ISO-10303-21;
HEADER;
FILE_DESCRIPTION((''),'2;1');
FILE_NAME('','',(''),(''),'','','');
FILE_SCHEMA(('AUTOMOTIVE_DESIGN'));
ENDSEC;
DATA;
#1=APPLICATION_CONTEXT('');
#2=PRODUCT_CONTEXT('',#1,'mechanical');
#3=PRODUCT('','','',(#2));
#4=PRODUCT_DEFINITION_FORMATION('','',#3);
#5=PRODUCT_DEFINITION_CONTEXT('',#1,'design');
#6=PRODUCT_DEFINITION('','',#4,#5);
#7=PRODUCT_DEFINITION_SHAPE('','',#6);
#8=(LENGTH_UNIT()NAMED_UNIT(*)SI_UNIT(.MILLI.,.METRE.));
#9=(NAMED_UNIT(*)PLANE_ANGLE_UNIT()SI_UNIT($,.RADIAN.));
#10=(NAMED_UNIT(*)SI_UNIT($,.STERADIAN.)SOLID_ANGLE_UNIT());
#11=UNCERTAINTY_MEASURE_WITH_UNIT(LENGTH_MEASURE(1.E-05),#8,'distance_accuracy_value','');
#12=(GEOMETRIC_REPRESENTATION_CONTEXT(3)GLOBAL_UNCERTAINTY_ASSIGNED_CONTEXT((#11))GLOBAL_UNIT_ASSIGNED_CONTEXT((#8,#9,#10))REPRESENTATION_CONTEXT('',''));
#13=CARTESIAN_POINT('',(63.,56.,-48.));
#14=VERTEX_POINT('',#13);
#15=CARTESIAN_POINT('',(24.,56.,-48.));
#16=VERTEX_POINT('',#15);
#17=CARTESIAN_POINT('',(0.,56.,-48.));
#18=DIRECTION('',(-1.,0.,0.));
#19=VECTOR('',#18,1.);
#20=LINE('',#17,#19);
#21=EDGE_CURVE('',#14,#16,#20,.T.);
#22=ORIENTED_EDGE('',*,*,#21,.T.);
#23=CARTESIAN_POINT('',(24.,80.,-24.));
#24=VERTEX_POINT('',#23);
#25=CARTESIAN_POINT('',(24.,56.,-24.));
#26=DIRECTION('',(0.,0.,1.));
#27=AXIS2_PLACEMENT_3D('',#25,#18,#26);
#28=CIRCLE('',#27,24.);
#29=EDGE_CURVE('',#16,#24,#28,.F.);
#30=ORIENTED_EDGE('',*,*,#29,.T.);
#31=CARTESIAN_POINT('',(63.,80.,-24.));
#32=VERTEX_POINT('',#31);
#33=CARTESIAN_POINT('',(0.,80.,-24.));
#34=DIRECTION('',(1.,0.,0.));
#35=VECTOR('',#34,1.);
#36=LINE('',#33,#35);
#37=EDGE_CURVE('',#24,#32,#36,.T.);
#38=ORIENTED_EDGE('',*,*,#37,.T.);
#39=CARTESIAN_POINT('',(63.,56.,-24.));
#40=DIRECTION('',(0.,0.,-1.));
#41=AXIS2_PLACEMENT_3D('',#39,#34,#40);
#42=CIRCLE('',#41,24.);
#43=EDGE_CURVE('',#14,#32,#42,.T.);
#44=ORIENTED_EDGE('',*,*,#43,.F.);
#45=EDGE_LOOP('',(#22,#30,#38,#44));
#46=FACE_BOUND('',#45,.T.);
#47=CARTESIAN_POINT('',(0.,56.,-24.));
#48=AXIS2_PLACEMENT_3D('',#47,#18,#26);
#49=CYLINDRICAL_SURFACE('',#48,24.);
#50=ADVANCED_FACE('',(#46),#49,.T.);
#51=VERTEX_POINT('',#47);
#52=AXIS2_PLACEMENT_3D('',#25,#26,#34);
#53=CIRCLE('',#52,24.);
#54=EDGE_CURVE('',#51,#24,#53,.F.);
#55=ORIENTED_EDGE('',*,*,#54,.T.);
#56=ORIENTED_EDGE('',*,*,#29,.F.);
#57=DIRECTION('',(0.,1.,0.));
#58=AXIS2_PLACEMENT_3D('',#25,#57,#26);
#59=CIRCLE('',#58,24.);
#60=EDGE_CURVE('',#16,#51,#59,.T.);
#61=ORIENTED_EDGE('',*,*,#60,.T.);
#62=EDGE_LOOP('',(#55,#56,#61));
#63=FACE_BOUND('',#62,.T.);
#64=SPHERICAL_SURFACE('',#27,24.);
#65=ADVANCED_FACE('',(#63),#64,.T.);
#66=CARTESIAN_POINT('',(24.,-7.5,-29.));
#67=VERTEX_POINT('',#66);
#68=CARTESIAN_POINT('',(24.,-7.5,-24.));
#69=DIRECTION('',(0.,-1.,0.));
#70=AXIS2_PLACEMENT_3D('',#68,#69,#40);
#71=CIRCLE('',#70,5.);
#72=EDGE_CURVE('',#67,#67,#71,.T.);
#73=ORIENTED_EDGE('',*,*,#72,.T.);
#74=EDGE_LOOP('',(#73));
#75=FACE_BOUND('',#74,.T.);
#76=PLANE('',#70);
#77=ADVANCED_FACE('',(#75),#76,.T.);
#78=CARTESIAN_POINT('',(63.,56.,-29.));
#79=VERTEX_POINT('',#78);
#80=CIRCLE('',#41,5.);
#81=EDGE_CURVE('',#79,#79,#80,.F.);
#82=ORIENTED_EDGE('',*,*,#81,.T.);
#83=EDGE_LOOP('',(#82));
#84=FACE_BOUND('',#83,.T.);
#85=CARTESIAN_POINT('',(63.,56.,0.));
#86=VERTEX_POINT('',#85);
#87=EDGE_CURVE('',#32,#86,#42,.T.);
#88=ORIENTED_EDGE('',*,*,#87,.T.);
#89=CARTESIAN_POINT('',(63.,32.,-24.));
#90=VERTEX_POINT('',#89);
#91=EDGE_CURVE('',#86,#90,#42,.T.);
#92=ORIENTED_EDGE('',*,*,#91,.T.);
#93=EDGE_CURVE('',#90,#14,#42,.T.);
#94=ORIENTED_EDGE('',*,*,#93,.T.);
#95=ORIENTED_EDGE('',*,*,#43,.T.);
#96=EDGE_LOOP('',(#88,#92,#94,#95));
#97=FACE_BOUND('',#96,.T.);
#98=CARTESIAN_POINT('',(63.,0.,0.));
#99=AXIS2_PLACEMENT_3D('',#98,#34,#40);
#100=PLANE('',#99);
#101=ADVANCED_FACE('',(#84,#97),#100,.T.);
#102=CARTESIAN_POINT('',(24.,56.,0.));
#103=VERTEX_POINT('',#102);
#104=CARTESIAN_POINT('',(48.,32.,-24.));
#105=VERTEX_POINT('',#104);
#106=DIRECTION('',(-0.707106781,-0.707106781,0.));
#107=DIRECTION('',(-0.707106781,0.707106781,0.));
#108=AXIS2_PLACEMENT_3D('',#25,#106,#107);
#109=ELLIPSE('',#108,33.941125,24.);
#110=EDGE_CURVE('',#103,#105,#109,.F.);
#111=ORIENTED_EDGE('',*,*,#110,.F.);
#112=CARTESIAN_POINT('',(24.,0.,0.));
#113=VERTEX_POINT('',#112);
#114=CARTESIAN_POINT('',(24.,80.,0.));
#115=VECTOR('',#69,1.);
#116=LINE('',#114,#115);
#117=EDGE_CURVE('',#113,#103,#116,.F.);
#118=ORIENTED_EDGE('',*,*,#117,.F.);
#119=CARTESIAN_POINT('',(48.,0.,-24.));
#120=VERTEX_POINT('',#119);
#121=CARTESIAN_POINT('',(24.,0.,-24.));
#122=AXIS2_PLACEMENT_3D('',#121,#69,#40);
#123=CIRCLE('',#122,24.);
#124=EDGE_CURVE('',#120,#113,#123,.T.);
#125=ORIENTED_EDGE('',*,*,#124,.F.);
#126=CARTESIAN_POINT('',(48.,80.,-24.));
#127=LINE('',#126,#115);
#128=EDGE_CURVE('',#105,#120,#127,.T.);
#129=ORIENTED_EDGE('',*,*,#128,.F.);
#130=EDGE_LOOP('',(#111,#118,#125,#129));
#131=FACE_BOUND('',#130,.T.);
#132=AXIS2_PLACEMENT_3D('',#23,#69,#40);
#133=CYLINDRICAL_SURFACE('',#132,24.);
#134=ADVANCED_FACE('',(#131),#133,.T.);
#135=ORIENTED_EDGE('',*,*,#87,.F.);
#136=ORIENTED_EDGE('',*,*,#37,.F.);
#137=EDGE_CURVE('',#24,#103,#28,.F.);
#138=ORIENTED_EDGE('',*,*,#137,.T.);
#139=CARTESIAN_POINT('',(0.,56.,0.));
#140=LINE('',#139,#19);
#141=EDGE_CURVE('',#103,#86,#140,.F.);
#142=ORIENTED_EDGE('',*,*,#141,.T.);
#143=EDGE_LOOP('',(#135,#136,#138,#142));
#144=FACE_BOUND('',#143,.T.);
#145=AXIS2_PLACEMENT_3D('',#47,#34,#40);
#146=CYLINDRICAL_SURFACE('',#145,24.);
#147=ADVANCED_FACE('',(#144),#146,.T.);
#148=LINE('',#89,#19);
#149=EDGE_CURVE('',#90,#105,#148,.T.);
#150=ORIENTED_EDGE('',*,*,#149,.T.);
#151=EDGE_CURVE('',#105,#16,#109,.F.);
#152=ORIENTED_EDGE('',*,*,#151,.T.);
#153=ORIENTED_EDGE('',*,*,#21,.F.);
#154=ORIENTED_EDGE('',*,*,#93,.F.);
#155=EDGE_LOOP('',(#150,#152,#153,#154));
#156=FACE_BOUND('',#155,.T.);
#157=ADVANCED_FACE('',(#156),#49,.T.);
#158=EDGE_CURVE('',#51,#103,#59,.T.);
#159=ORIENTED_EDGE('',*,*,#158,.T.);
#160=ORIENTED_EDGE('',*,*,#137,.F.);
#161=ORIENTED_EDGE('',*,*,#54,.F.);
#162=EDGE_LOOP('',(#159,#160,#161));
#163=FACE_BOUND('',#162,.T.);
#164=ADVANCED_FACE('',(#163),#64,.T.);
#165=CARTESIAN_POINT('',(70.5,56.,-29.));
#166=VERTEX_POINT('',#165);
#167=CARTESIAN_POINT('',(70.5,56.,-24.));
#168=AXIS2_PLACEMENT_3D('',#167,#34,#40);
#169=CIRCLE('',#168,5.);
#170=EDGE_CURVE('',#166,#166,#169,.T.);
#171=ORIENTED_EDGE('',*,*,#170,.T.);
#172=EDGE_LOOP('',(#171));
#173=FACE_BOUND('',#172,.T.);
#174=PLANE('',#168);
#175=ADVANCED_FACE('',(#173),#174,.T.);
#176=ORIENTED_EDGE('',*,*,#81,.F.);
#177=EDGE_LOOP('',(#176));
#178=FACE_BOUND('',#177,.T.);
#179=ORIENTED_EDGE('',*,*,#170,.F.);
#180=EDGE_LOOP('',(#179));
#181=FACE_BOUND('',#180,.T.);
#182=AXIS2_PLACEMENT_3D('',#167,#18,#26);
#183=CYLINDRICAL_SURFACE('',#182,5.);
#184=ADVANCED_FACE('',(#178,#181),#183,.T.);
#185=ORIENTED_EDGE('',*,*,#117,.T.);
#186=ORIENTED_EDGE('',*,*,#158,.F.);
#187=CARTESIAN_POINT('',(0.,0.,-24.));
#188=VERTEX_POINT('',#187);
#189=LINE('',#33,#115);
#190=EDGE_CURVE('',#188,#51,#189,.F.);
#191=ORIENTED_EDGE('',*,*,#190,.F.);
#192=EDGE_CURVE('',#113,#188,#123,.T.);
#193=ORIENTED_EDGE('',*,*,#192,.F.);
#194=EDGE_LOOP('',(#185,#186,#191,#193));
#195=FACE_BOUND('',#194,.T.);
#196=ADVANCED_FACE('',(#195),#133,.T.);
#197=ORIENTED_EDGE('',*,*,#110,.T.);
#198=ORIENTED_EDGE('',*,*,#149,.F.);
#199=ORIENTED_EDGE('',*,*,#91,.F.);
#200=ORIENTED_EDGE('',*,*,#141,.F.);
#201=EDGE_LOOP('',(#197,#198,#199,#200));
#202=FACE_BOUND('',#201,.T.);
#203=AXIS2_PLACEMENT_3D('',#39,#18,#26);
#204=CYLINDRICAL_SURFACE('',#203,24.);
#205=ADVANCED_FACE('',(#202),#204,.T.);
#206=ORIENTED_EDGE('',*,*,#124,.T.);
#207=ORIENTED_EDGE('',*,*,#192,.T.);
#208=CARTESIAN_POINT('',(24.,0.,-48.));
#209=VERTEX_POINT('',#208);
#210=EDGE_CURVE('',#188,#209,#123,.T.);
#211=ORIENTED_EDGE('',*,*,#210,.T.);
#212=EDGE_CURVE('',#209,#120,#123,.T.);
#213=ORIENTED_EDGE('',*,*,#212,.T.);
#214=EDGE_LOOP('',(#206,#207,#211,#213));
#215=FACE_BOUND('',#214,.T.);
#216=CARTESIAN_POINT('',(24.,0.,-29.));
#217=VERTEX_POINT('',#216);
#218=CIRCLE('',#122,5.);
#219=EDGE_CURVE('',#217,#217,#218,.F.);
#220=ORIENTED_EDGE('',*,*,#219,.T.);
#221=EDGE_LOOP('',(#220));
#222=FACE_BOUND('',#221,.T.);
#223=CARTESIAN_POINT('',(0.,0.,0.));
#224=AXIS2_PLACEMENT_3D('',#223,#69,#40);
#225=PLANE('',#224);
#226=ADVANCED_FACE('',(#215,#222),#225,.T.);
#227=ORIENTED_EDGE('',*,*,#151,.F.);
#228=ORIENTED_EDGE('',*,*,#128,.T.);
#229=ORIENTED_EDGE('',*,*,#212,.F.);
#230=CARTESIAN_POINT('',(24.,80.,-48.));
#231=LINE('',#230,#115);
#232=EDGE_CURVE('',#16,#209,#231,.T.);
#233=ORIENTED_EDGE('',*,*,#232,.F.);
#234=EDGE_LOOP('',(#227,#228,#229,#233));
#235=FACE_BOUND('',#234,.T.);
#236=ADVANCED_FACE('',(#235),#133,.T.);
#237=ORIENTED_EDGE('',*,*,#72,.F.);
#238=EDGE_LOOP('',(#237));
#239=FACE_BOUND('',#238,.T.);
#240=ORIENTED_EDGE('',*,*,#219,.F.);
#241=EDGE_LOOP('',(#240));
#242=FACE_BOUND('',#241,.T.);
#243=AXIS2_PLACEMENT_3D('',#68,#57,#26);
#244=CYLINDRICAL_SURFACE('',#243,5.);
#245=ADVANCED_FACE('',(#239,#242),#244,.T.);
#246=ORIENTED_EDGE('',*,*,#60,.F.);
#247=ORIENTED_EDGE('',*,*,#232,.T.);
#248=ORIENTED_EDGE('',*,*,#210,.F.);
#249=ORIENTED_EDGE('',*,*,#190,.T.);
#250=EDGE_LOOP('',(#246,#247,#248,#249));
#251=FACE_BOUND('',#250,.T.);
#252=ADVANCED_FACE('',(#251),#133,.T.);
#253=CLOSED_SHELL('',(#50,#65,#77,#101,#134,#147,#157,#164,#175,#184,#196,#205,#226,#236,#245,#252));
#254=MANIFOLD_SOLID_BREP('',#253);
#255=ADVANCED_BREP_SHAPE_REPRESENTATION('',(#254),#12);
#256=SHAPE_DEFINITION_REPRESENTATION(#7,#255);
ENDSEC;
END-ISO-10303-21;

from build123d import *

# Parameters (mm, degrees)
SKETCH1_W           = 48
SKETCH1_H           = 48
BOSS_EXTRUDE1_DEPTH = 80
SKETCH2_W           = 48
SKETCH2_H           = 48
BOSS_EXTRUDE2_DEPTH = 15
FILLET2_R           = 24
SKETCH3_R           = 5
BOSS_EXTRUDE3_DEPTH = 7.5
SKETCH4_R           = 5
BOSS_EXTRUDE4_DEPTH = 7.5


with BuildPart() as part:
    # Sketch1 → Boss-Extrude1 (new body)
    with BuildSketch(Plane(origin=(0, 0, 0), x_dir=(1, 0, 0), z_dir=(0, 1, 0))):
        with Locations((24, 24)):
            Rectangle(SKETCH1_W, SKETCH1_H)
    extrude(amount=BOSS_EXTRUDE1_DEPTH)

    # Sketch2 → Boss-Extrude2 (add)
    with BuildSketch(Plane(origin=(48, 0, 0), x_dir=(0, 0, -1), z_dir=(1, 0, 0))):
        with Locations((24, 56)):
            Rectangle(SKETCH2_W, SKETCH2_H)
    extrude(amount=BOSS_EXTRUDE2_DEPTH)

    # Fillet2
    fillet2_edges = [part.edges().sort_by_distance(p)[0] for p in [
        (48, 16, -48),
        (48, 16, 0),
        (55.5, 32, 0),
        (31.5, 80, -48),
        (55.5, 32, -48),
        (0, 80, -24),
        (0, 40, -48),
        (0, 40, 0),
        (31.5, 80, 0),
    ]]
    fillet(fillet2_edges, radius=FILLET2_R - 0.0001)  # a hair under: the kernel refuses the full size

    # Sketch3 → Boss-Extrude3 (add, symmetric)
    with BuildSketch(Plane(origin=(0, 0, 0), x_dir=(-1, 0, 0), z_dir=(0, -1, 0))):
        with Locations(Location((-24, 24, 0), (0, 0, 90))):
            Circle(SKETCH3_R)
    extrude(amount=BOSS_EXTRUDE3_DEPTH, both=True)

    # Sketch4 → Boss-Extrude4 (add, symmetric)
    with BuildSketch(Plane(origin=(63, 0, 0), x_dir=(0, 0, -1), z_dir=(1, 0, 0))):
        with Locations((24, 56)):
            Circle(SKETCH4_R)
    extrude(amount=BOSS_EXTRUDE4_DEPTH, both=True)


solid = part.part
